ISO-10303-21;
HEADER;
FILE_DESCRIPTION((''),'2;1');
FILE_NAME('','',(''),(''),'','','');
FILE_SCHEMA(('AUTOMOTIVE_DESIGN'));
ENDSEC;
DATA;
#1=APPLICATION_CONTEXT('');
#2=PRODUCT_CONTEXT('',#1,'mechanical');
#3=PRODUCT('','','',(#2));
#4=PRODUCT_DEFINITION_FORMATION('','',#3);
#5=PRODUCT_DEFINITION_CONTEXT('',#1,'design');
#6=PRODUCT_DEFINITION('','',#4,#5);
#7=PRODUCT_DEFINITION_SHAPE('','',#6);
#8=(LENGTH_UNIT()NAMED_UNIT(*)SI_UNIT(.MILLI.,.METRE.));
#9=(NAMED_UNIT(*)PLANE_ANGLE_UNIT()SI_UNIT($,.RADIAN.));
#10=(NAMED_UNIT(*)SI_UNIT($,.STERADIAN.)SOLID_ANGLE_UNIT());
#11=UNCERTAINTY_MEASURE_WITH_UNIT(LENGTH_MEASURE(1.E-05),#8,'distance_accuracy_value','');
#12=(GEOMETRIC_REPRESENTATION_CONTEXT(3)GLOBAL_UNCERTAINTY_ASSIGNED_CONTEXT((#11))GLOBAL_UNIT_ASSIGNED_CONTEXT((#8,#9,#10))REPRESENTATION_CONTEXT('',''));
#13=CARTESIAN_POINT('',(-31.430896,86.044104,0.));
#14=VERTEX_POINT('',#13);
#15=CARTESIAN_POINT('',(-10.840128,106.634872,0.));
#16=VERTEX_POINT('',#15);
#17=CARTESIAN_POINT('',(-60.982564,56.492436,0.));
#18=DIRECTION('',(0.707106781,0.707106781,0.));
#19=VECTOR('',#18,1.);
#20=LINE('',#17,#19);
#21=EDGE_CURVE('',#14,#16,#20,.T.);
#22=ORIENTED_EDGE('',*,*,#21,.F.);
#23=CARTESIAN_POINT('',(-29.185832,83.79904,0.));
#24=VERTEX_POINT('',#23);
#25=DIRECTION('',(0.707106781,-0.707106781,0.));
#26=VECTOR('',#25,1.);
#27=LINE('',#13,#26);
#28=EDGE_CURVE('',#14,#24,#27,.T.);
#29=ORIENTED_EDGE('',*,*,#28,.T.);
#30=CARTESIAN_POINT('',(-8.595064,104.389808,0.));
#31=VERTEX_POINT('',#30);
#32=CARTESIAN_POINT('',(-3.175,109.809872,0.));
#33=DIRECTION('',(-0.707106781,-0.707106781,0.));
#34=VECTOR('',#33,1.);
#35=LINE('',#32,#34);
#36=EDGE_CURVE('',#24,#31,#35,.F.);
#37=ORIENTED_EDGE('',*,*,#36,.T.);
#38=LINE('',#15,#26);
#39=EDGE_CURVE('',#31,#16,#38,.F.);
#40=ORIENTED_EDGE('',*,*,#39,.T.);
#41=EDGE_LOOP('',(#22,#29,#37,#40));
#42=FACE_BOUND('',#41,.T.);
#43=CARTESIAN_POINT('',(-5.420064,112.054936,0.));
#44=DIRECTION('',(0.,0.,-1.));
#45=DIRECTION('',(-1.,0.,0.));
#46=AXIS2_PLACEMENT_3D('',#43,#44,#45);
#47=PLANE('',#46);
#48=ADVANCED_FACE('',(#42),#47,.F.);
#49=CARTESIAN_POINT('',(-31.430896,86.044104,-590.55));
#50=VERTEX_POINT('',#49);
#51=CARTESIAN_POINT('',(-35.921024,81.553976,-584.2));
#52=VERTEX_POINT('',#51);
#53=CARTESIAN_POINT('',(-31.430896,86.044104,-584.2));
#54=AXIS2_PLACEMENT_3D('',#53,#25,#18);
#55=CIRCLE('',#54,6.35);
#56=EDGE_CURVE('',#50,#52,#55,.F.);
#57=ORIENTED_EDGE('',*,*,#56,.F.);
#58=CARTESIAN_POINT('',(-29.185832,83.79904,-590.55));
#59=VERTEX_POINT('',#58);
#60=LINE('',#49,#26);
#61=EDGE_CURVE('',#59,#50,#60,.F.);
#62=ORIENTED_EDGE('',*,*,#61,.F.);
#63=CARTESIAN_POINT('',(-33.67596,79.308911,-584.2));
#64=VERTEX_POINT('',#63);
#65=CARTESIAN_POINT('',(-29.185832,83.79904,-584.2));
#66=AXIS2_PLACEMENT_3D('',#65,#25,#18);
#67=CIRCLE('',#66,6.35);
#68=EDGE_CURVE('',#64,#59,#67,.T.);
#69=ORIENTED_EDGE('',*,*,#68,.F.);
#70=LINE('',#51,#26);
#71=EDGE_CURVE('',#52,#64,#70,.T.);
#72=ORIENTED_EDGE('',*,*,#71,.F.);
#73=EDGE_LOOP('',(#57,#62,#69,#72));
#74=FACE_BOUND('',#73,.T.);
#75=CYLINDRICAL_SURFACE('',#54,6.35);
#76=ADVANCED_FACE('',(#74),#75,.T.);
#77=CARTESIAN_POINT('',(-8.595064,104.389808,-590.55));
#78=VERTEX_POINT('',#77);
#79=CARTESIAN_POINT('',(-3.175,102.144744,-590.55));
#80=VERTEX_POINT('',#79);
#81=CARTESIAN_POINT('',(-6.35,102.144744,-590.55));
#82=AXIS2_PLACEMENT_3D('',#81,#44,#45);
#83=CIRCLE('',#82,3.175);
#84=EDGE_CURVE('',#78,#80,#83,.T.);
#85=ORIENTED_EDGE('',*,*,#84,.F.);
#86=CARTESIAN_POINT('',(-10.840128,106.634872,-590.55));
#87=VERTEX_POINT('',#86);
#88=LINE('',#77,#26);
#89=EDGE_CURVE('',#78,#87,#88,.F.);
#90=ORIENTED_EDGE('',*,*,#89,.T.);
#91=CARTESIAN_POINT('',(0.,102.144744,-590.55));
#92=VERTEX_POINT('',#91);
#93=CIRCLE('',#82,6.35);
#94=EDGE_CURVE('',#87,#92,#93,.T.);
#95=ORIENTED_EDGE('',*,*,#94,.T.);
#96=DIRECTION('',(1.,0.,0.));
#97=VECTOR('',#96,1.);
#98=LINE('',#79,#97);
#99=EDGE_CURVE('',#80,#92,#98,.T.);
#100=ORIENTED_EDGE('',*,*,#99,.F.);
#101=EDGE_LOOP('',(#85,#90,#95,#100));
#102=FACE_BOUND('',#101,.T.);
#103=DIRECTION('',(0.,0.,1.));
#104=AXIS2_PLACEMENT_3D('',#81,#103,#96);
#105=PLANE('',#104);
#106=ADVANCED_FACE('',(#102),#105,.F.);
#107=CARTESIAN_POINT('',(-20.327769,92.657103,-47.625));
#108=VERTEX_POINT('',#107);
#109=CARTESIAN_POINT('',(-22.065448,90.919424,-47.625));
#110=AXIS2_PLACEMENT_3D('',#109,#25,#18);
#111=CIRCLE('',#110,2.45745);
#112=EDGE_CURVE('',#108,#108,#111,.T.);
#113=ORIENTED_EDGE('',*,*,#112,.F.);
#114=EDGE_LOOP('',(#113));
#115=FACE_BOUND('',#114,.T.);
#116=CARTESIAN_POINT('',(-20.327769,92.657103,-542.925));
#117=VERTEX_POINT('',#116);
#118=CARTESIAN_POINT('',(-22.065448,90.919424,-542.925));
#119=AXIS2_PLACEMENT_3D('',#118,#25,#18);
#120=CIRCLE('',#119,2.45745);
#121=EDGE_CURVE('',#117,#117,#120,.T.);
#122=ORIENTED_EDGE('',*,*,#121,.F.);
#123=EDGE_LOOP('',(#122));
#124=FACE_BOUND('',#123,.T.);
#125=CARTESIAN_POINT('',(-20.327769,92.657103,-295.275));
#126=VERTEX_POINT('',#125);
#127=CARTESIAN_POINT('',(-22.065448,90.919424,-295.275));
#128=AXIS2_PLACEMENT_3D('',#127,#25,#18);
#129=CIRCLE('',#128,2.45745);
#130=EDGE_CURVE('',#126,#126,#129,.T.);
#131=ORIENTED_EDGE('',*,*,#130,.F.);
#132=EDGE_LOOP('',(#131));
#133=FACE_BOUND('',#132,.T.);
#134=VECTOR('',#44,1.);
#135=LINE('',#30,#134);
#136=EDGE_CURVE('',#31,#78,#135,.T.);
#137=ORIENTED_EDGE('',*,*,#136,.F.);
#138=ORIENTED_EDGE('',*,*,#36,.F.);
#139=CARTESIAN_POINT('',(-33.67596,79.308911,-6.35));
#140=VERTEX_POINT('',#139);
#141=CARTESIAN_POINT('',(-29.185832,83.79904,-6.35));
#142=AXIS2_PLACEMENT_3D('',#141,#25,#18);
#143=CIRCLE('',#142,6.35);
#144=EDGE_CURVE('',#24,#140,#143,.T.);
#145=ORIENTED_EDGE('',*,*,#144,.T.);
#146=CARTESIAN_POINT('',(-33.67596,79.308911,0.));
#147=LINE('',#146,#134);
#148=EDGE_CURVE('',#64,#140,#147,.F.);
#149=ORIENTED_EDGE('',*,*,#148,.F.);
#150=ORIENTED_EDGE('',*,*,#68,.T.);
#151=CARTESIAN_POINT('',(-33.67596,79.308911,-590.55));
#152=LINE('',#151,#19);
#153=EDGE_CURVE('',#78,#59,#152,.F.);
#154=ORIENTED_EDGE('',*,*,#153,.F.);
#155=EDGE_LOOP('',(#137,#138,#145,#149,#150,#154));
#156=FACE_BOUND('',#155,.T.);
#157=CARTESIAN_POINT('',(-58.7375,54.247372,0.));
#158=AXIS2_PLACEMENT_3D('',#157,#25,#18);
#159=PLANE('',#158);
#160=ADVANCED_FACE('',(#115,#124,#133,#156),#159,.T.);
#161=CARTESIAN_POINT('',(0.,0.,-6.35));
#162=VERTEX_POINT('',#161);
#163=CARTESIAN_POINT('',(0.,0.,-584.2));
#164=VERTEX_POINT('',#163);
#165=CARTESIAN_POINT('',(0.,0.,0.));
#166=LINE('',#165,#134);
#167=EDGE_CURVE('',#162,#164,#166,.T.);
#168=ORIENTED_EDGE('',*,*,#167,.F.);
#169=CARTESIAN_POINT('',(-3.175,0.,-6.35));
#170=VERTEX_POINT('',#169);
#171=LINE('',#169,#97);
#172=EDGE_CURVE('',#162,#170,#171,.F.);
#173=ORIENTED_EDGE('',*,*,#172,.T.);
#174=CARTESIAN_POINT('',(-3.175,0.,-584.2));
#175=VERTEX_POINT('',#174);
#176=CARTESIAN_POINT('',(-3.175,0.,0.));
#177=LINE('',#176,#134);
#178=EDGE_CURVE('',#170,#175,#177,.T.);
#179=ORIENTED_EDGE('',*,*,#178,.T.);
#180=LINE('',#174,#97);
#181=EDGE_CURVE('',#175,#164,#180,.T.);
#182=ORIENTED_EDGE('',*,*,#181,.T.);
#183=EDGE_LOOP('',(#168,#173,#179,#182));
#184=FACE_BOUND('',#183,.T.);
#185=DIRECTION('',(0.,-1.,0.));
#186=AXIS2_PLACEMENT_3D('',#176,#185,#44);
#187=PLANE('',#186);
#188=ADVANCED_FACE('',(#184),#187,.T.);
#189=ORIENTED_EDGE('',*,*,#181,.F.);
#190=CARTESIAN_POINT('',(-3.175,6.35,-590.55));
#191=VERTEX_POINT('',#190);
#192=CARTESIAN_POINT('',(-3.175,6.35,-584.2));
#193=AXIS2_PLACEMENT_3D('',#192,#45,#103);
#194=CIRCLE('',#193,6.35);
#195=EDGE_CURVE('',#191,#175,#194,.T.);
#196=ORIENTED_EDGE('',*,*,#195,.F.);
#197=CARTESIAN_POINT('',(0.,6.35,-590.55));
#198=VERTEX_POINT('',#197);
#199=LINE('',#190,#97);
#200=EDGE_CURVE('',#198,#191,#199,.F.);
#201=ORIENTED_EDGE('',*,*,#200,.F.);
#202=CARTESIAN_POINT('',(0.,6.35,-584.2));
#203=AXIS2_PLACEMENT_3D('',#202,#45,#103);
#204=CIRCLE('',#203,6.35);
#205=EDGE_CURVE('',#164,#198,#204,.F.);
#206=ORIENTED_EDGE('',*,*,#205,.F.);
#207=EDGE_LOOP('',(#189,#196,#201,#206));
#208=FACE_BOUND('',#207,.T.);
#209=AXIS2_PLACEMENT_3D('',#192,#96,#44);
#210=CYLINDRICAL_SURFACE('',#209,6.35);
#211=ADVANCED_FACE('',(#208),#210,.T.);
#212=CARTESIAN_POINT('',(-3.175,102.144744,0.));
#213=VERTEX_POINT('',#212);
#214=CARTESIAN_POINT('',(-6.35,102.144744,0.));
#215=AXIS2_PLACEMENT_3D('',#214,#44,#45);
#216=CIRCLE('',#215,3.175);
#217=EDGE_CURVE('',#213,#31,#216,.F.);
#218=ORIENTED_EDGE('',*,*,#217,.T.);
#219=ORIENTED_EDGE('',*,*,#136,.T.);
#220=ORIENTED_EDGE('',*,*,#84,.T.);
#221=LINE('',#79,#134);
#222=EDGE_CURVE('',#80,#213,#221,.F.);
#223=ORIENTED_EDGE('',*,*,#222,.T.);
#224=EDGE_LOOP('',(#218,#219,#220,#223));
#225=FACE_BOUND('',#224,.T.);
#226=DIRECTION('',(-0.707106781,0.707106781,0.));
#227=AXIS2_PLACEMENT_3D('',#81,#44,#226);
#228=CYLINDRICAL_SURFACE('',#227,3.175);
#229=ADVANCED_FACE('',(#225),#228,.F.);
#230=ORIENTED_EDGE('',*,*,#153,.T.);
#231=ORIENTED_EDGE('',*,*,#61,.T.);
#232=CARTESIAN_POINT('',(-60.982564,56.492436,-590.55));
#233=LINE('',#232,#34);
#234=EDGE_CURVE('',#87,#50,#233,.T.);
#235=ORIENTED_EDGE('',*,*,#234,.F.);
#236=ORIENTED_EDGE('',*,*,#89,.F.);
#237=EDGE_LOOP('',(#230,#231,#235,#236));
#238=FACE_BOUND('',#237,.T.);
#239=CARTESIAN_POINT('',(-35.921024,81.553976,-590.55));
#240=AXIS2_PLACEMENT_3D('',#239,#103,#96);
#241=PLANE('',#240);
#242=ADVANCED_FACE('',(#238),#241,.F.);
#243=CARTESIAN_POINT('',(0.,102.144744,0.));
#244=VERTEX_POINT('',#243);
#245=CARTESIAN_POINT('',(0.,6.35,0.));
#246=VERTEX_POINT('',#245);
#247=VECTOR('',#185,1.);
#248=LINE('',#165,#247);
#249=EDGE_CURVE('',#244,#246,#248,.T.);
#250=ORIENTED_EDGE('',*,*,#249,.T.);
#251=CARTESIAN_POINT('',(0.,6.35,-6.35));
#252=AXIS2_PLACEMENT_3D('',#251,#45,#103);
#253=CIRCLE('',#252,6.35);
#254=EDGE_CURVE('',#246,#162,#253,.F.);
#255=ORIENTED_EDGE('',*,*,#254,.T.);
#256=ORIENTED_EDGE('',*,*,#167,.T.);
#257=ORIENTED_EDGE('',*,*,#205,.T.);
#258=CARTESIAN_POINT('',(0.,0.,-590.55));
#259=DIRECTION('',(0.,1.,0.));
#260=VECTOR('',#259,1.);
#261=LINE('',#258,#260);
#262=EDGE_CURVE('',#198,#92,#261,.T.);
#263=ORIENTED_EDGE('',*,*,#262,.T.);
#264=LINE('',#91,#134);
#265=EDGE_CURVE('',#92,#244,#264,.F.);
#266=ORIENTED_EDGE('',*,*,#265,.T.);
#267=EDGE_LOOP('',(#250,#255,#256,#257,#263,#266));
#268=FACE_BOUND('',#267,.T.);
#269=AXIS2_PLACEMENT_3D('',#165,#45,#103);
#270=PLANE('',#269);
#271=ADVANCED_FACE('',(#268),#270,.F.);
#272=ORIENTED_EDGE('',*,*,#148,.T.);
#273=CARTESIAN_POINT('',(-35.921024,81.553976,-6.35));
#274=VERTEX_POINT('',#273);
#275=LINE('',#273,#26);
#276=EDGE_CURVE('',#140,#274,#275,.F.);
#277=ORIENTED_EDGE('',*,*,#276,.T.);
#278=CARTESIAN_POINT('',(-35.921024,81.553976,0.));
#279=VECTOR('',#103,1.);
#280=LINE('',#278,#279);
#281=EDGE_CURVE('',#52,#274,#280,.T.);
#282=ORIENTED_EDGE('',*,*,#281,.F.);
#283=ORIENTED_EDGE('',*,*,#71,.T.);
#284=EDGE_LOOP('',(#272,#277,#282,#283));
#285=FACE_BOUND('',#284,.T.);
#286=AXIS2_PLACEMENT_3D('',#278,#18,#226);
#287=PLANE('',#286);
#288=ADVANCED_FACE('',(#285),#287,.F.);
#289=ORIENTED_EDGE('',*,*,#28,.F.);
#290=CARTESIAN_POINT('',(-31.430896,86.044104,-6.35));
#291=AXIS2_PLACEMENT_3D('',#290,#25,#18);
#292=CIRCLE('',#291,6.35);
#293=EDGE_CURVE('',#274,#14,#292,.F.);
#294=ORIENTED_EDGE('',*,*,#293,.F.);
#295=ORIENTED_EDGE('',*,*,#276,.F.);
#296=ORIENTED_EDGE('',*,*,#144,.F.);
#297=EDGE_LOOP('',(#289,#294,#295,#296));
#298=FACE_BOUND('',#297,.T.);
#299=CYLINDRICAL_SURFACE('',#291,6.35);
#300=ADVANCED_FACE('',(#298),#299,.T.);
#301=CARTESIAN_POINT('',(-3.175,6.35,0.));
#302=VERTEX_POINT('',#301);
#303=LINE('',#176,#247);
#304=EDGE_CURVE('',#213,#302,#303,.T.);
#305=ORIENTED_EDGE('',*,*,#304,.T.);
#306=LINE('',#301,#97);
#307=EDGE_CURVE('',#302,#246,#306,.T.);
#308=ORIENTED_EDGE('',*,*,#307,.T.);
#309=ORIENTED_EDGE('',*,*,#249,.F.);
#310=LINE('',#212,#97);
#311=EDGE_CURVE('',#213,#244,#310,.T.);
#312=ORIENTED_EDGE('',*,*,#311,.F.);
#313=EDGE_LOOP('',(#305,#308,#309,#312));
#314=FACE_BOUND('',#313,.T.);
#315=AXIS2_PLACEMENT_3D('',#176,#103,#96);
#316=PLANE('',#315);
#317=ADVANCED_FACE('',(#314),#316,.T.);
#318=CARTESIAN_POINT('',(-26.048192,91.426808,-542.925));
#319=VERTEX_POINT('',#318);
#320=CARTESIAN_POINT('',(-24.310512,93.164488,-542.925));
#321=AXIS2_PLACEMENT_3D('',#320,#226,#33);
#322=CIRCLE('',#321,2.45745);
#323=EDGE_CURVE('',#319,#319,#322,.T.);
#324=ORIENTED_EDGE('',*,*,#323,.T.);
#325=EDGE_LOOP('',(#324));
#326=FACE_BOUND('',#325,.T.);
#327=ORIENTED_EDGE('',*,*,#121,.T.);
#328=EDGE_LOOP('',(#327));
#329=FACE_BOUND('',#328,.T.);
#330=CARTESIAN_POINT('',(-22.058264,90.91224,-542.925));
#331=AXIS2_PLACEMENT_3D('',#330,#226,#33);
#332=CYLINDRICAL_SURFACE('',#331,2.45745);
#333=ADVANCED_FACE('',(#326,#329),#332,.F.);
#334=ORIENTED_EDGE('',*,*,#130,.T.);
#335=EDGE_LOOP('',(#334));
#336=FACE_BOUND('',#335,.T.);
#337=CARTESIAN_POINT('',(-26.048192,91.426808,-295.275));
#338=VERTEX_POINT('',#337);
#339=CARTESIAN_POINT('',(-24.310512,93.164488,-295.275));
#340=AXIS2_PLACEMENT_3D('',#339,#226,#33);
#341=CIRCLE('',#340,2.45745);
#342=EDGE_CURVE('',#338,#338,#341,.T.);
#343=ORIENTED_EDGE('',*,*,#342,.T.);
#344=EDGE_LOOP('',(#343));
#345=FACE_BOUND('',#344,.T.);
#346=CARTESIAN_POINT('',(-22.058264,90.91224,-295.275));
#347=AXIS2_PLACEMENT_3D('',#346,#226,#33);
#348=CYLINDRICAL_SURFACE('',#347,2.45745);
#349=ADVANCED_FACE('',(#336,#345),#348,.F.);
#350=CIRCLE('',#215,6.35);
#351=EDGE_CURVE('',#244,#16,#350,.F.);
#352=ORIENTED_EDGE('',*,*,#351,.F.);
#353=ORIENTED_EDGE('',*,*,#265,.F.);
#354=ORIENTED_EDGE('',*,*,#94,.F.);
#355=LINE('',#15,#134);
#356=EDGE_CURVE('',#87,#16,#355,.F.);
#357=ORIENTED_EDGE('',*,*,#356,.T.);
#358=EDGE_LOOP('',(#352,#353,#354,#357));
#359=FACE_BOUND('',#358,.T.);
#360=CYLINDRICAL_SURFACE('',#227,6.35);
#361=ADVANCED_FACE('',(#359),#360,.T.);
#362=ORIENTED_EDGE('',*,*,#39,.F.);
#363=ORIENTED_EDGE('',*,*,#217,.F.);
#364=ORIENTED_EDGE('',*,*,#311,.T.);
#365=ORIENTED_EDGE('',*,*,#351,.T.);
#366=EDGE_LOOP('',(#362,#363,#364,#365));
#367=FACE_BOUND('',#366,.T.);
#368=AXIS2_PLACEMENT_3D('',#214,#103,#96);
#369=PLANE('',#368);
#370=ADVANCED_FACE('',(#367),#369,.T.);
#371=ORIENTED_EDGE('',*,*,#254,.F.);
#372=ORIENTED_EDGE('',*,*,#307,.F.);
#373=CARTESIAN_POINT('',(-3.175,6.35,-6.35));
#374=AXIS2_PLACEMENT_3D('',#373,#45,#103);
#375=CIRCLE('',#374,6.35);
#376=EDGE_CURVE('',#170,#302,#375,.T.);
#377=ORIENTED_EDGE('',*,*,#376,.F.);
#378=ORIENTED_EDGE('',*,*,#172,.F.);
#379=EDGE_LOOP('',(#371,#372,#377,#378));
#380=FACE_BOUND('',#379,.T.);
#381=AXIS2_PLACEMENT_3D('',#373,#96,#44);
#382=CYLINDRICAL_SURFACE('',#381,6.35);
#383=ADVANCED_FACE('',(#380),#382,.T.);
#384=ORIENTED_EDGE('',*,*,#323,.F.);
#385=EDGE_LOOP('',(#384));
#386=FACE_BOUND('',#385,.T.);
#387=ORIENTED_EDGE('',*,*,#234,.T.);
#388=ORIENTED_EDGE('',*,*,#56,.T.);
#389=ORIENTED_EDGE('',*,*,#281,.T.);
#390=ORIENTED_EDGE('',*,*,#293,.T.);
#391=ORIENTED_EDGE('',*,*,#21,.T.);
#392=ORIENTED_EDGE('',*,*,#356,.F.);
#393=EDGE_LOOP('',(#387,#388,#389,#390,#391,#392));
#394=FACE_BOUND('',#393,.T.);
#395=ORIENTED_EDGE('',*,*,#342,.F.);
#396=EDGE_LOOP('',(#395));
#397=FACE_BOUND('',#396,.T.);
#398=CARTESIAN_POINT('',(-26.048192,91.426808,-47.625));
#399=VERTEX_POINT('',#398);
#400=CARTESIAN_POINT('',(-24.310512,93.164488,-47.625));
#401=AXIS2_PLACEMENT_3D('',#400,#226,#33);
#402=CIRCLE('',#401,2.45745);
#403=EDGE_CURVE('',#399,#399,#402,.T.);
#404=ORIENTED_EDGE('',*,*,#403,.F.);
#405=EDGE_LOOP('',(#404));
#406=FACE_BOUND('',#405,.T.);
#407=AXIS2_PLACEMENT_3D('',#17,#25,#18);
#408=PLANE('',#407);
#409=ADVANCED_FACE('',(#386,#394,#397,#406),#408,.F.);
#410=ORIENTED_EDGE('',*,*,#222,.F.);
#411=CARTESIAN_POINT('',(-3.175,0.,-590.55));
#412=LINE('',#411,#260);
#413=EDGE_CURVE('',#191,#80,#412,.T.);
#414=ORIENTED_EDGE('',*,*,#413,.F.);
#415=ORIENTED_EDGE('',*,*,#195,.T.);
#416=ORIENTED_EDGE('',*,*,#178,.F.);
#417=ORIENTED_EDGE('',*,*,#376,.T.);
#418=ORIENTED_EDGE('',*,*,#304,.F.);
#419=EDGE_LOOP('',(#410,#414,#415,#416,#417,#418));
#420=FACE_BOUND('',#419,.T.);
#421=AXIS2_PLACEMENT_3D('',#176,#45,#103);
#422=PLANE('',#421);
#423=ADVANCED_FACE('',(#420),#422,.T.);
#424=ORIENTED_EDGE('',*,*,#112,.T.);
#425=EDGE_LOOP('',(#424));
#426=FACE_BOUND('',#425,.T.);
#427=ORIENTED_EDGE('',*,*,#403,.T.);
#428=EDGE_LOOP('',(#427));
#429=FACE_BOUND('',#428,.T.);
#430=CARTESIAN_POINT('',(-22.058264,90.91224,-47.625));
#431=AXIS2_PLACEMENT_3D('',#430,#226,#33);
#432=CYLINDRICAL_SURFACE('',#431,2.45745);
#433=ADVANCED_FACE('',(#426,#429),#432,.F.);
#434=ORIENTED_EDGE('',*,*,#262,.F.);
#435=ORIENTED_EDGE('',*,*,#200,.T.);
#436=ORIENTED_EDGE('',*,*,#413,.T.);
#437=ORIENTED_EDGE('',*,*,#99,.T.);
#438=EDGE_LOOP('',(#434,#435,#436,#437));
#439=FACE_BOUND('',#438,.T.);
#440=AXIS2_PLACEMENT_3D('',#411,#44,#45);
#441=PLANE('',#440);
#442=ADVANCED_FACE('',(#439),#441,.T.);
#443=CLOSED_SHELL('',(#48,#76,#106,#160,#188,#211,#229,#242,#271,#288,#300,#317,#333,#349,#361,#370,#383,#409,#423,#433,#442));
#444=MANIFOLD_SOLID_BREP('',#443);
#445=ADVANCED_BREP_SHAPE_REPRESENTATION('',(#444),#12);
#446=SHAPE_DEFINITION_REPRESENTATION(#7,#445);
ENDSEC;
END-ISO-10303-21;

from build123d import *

# Parameters (mm, degrees)
SKETCH1_W            = 590.55
SKETCH1_H            = 114.3
BASE_FLANGE1_DEPTH   = 3.175
EDGE_FLANGE1_START   = -590.55
EDGE_FLANGE1_DEPTH   = 590.55
EDGE_FLANGE1_2_DEPTH = 590.55
FILLET1_R            = 6.35
SKETCH9_R            = 2.45745
CUT_EXTRUDE1_DEPTH   = 3.18516


# Read off the part's stored shape, not the designer's step: Edge-Flange1
# Sheet-metal steps are written as plain solids
with BuildPart() as part:
    # Sketch1 → Base-Flange1 (new body)
    with BuildSketch(Plane(origin=(0, 0, 0), x_dir=(0, 0, -1), z_dir=(1, 0, 0))):
        with Locations((295.275, 57.15)):
            Rectangle(SKETCH1_W, SKETCH1_H)
    extrude(amount=-BASE_FLANGE1_DEPTH)

    # Edge-Flange1 outline → Edge-Flange1 (cut)
    with BuildSketch(Plane.XY.offset(EDGE_FLANGE1_START)):
        with BuildLine():
            Line((-3.175, 114.3), (-3.175, 107.644005193))
            ThreePointArc((-3.175, 107.644005193), (-0.850738686, 105.319743879), (0, 102.144743879))
            Line((0, 102.144743879), (0, 114.3))
            Line((0, 114.3), (-3.175, 114.3))
        make_face()
    extrude(amount=EDGE_FLANGE1_DEPTH, mode=Mode.SUBTRACT)

    # Edge-Flange1 2 outline → Edge-Flange1 2 (add)
    with BuildSketch(Plane.XY.offset(EDGE_FLANGE1_START)):
        with BuildLine():
            ThreePointArc((-3.175, 107.644005193), (-7.178841321, 108.440418748), (-10.840128061, 106.634871939))
            Line((-10.840128061, 106.634871939), (-35.921024484, 81.553975516))
            Line((-35.921024484, 81.553975516), (-33.675960454, 79.308911485))
            Line((-33.675960454, 79.308911485), (-8.59506403, 104.389807909))
            ThreePointArc((-8.59506403, 104.389807909), (-5.134980102, 105.078061395), (-3.175, 102.144743879))
            Line((-3.175, 102.144743879), (-3.175, 107.644005193))
        make_face()
    extrude(amount=EDGE_FLANGE1_2_DEPTH)

    # Fillet1
    fillet1_edges = [part.edges().sort_by_distance(p)[0] for p in [
        (-34.798492469, 80.4314435, 0),
        (-34.798492469, 80.4314435, -590.55),
        (-1.5875, 0, -590.55),
        (-1.5875, 0, 0),
    ]]
    fillet(fillet1_edges, radius=FILLET1_R)

    # Sketch9 → Cut-Extrude1 (cut)
    with BuildSketch(Plane(origin=(-58.7375, 58.7375, 0), x_dir=(0, 0, 1), z_dir=(-0.7071067811865465, 0.7071067811865487, 0))):
        with Locations(Location((-542.925, 48.687112999, 0), (0, 0, 270))):
            Circle(SKETCH9_R)
        with Locations(Location((-295.275, 48.687112999, 0), (0, 0, 270))):
            Circle(SKETCH9_R)
        with Locations(Location((-47.625, 48.687112999, 0), (0, 0, 270))):
            Circle(SKETCH9_R)
    extrude(amount=-CUT_EXTRUDE1_DEPTH, mode=Mode.SUBTRACT)


solid = part.part
